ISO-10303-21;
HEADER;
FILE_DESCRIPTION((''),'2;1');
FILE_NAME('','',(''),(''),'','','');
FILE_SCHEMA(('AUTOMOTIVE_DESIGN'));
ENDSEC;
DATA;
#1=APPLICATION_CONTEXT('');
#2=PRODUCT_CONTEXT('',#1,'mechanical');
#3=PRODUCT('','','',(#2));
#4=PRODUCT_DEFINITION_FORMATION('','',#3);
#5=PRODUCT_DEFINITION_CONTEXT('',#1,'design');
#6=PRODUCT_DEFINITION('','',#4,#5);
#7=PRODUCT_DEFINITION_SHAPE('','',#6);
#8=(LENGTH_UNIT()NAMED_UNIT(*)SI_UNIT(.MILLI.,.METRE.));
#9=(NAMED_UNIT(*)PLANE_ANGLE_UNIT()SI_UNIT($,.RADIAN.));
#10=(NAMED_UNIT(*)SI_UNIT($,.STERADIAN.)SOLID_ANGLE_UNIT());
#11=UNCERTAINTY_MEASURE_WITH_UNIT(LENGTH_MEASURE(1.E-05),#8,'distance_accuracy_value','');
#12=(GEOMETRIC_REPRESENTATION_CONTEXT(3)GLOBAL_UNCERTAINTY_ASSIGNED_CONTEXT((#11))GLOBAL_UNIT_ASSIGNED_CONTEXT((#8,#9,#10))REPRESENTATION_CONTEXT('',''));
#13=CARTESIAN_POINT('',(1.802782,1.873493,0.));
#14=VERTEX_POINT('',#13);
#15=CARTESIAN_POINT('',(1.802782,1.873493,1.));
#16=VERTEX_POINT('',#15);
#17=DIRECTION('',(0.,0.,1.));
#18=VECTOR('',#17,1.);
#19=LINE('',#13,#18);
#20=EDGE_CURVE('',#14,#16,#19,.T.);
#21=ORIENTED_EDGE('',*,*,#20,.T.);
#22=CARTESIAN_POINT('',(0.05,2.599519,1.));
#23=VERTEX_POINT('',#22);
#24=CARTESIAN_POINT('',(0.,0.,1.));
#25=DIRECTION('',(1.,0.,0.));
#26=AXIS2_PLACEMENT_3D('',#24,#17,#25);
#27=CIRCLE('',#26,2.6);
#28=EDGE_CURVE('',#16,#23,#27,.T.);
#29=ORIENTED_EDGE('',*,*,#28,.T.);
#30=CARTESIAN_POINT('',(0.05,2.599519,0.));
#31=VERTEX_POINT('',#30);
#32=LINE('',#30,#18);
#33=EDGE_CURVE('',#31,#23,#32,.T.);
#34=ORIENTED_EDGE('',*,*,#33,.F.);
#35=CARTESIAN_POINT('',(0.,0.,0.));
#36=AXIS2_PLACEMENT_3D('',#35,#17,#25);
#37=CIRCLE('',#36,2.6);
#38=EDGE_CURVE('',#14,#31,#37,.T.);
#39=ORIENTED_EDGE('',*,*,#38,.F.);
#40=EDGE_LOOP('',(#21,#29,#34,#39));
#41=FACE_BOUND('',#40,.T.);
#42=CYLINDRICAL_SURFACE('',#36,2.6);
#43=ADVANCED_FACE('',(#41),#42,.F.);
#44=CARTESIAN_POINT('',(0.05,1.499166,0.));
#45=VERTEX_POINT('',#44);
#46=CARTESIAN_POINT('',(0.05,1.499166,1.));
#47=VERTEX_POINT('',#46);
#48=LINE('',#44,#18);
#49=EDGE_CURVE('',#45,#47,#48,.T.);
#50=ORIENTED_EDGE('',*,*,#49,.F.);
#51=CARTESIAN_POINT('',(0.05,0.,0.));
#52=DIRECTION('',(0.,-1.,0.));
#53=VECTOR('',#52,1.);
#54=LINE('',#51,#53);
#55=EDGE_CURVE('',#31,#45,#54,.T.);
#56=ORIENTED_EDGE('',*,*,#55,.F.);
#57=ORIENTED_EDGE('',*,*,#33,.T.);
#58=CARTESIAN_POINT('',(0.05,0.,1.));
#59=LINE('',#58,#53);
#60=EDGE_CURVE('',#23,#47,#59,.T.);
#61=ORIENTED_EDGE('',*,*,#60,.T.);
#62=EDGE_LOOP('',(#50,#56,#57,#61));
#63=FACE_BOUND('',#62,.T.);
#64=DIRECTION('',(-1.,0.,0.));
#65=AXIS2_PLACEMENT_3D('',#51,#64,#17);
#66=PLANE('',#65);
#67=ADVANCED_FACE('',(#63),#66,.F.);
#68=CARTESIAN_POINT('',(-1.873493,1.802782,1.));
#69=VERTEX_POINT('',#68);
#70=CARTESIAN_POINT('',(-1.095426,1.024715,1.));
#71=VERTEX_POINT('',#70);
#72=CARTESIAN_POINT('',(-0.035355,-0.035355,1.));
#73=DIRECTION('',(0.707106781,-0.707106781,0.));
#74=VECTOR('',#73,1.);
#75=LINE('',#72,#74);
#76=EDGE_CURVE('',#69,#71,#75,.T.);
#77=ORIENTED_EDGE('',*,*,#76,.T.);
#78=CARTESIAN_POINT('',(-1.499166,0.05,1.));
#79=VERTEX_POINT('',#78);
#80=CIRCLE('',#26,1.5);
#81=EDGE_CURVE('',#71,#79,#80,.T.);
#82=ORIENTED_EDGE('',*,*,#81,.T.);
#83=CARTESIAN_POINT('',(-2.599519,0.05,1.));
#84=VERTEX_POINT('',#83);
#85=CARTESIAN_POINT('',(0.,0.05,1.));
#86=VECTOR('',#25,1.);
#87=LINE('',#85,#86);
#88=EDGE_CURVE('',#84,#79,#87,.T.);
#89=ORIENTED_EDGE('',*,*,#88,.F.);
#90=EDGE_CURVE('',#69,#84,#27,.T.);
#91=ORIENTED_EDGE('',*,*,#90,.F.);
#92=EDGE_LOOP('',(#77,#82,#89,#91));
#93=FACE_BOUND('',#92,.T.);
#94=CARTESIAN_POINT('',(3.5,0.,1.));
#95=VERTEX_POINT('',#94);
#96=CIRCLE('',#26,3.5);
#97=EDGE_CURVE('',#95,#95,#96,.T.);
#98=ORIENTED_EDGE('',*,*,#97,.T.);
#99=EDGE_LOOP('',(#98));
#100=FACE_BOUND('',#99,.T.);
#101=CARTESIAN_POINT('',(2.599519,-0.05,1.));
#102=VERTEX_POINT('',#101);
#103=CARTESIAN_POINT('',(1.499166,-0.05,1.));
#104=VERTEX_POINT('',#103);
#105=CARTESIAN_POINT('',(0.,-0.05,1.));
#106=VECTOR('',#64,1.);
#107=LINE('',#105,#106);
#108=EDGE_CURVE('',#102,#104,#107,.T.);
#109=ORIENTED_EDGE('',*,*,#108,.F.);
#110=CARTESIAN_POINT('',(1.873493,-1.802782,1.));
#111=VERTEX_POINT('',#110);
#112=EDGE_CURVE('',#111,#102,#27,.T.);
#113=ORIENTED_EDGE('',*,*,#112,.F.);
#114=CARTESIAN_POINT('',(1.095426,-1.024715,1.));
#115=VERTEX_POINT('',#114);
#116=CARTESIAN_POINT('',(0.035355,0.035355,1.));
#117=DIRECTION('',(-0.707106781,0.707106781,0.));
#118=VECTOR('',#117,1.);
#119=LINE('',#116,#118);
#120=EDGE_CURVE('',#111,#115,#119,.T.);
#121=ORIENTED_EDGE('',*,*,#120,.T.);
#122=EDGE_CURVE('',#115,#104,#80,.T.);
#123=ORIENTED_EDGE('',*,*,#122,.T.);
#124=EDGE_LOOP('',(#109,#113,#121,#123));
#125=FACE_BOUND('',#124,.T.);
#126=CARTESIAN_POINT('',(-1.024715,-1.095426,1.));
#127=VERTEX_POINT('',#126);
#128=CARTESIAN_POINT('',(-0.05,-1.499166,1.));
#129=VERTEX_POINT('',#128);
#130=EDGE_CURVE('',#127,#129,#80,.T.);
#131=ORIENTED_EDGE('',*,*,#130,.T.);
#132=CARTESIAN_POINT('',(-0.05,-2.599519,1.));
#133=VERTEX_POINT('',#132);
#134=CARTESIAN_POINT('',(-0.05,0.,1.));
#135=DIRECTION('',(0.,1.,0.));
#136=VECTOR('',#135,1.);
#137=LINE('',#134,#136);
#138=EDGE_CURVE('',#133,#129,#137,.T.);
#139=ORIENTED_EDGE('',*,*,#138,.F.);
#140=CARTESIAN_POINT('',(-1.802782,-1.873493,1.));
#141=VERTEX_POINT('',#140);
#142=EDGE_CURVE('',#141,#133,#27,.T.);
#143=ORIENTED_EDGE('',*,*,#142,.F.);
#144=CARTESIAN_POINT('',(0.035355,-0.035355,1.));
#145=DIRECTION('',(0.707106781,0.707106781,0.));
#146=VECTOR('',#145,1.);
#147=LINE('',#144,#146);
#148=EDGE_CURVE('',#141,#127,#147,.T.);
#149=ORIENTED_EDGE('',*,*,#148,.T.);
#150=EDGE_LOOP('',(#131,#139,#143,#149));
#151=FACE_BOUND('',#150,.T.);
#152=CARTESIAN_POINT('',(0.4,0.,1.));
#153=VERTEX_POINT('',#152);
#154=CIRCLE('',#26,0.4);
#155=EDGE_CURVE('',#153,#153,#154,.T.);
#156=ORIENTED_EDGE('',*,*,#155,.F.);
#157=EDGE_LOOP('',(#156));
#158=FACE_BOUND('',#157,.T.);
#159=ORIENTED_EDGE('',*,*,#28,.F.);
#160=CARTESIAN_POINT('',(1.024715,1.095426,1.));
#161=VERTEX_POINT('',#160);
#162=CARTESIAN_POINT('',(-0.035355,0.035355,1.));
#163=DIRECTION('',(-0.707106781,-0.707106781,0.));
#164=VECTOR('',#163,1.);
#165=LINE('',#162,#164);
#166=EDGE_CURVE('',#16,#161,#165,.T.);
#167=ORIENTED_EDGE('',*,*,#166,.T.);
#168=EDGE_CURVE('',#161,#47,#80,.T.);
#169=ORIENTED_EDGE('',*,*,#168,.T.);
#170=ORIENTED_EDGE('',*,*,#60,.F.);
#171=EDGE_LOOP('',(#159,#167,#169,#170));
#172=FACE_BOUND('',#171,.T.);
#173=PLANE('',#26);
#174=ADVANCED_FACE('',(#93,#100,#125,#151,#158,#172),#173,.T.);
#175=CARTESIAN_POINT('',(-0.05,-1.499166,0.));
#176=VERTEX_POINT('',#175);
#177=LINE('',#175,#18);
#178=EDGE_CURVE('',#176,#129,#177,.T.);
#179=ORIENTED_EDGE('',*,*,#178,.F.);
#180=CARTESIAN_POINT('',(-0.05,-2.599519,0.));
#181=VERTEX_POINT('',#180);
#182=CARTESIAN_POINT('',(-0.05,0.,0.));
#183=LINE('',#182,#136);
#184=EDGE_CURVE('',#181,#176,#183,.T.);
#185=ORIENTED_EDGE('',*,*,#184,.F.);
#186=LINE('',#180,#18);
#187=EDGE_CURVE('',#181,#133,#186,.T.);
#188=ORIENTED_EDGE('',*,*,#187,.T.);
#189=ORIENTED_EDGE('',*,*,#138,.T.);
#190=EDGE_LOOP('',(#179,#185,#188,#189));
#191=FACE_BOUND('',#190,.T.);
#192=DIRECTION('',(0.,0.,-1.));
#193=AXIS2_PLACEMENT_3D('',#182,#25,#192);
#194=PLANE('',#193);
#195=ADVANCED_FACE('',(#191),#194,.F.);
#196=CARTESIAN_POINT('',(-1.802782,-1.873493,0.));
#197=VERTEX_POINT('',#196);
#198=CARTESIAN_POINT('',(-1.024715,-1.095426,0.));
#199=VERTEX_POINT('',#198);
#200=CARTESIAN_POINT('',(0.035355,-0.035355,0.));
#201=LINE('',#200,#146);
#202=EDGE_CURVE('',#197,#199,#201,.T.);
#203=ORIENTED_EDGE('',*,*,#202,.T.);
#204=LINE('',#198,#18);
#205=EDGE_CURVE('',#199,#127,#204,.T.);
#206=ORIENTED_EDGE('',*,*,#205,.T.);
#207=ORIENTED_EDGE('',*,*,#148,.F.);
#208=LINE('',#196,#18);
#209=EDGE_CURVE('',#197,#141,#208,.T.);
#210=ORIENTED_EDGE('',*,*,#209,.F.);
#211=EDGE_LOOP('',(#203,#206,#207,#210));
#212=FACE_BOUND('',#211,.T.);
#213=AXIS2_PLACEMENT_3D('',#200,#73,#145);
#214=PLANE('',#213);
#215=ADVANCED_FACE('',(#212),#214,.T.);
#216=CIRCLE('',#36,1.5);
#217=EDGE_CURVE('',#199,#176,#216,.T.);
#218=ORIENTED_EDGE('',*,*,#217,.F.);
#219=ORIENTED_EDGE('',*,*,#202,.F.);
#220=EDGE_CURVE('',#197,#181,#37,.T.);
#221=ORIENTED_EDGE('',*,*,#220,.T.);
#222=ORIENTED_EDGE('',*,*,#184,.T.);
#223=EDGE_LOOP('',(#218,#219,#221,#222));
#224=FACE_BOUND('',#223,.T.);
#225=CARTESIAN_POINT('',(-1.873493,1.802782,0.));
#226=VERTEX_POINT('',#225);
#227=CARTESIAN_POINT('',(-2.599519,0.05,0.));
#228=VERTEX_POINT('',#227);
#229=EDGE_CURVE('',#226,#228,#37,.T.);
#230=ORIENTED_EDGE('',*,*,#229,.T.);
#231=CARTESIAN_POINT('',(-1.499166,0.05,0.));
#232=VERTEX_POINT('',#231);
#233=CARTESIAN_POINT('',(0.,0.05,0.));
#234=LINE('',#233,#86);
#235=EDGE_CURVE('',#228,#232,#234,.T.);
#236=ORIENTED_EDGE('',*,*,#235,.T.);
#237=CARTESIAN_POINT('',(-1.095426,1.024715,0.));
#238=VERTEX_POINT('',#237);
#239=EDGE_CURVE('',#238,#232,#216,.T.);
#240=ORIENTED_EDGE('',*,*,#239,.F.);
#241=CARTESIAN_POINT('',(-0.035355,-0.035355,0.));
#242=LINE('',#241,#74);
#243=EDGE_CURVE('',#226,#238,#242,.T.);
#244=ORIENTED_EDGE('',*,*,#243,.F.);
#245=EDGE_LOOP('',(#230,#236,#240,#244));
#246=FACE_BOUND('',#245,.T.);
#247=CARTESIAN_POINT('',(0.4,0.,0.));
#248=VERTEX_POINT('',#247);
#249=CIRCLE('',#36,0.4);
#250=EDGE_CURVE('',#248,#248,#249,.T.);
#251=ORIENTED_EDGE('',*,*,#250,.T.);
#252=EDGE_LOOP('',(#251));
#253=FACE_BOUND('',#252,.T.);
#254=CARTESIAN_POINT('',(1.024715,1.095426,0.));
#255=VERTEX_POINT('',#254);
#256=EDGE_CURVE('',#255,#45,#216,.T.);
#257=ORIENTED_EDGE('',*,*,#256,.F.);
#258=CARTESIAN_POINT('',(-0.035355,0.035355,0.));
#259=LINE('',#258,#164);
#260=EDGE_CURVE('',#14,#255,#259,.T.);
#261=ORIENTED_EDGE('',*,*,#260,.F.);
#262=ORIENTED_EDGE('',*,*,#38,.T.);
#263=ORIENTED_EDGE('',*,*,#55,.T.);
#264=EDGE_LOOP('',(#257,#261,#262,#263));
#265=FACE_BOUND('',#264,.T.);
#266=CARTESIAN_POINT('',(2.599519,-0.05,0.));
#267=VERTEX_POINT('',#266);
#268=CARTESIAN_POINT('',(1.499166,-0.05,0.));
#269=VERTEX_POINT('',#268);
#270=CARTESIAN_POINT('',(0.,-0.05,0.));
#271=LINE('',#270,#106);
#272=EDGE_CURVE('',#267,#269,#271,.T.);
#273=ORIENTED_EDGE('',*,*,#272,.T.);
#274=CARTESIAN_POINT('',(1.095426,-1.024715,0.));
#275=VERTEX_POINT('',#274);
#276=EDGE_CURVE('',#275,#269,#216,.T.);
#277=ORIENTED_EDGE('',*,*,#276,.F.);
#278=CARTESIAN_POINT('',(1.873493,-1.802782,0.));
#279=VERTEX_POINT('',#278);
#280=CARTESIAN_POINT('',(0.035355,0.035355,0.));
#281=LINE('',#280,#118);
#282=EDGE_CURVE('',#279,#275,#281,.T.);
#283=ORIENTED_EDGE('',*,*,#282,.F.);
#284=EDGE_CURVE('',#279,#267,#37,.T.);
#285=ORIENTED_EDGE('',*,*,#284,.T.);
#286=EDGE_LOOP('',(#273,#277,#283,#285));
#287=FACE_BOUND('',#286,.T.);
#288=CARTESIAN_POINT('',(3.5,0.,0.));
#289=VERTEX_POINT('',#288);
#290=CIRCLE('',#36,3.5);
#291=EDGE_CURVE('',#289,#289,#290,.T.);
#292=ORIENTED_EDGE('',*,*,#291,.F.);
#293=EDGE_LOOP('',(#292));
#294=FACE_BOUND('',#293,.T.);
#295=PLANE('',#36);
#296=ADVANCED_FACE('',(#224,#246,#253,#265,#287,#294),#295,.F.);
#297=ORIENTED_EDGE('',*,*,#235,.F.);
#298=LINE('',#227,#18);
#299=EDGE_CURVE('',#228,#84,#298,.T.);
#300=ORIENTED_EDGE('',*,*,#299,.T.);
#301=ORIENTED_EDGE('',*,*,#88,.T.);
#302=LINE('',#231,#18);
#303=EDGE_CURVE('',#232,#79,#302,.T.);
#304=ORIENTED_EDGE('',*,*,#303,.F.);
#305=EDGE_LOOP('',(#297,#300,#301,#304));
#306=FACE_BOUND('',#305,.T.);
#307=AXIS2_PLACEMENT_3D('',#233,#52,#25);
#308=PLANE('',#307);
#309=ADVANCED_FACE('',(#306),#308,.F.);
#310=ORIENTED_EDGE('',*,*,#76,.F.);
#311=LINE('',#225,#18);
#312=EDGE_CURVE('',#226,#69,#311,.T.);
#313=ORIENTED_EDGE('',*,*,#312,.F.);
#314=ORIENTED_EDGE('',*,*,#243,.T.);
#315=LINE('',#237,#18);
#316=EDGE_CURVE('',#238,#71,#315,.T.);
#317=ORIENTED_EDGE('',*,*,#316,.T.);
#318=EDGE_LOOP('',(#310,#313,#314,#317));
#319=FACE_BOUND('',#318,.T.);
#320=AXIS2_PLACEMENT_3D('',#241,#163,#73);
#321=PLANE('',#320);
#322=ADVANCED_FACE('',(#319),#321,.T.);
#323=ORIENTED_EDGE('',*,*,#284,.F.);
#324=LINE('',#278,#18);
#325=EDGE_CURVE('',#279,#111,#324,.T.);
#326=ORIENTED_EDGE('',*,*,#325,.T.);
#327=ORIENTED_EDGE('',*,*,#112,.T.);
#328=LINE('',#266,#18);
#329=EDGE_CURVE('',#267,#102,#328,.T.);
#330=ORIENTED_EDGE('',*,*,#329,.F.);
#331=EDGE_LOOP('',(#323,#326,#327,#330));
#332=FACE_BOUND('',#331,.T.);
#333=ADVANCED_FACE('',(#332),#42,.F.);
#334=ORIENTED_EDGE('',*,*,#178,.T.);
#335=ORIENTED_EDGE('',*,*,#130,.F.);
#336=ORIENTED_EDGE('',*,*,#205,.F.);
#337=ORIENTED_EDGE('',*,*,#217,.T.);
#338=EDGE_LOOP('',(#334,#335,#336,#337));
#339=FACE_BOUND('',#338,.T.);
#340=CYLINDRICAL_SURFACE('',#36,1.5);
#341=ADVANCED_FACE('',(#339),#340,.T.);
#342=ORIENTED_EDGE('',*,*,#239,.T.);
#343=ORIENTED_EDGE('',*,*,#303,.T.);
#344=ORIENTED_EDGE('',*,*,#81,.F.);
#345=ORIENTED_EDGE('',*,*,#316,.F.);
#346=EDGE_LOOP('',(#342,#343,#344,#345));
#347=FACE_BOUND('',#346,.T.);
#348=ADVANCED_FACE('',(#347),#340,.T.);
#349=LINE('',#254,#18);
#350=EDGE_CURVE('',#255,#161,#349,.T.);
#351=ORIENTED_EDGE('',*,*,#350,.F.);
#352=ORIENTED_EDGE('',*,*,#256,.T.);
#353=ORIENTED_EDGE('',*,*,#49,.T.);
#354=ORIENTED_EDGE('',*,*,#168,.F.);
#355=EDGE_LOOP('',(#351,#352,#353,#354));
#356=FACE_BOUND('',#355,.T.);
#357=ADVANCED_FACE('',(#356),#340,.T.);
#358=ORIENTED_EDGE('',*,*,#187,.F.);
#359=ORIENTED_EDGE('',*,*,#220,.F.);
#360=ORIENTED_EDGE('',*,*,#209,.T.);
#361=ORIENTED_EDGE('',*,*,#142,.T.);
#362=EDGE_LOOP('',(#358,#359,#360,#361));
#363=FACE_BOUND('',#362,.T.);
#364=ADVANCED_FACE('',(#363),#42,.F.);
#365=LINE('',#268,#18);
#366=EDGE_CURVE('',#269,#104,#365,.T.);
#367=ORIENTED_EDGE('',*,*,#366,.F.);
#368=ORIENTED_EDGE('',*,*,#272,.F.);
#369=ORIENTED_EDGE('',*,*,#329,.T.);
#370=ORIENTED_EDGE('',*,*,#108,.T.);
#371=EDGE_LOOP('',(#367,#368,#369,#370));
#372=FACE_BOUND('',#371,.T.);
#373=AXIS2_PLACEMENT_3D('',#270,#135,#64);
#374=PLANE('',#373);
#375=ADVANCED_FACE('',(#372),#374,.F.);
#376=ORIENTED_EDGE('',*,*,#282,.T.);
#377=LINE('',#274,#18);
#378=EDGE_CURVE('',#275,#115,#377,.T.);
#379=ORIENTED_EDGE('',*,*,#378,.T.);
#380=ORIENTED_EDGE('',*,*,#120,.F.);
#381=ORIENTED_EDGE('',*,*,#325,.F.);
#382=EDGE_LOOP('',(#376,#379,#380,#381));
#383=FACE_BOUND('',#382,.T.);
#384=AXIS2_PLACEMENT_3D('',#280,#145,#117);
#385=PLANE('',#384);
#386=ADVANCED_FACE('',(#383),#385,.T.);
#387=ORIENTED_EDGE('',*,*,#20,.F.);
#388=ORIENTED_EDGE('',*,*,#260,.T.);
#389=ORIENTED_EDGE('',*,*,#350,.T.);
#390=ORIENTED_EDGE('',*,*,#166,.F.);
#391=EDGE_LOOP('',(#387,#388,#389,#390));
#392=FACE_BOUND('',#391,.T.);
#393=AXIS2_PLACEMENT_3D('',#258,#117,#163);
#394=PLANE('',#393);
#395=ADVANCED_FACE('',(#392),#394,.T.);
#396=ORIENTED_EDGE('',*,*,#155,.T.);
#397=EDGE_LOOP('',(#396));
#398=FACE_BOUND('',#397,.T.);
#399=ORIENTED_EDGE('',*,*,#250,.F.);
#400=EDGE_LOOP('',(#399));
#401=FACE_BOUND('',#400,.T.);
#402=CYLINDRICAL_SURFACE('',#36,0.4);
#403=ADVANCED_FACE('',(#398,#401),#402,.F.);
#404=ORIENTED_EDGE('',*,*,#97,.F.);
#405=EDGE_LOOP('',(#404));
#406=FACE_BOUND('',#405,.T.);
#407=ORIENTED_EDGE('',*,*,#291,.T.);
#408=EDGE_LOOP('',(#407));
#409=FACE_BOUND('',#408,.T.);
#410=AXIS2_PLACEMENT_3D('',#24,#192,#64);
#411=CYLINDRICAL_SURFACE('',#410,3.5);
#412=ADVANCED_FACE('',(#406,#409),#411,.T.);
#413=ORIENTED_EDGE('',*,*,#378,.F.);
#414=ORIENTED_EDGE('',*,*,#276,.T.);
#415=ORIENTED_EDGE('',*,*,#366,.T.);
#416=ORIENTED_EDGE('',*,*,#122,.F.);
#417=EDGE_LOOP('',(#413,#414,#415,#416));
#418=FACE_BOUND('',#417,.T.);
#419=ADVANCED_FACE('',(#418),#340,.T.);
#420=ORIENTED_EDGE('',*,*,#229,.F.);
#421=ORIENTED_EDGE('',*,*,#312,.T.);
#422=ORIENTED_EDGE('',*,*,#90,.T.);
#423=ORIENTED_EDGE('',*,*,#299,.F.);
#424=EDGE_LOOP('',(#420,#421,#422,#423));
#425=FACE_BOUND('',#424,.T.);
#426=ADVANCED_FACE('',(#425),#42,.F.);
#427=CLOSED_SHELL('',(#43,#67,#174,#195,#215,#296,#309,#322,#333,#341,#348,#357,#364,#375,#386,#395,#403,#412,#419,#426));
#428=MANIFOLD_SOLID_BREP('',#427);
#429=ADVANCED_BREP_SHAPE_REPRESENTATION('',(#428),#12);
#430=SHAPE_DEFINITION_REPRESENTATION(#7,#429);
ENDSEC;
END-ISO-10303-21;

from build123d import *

# Parameters (mm, degrees)
SKETCH2_R           = 3.5
BOSS_EXTRUDE1_DEPTH = 1
SKETCH4_R           = 0.4
CUT_EXTRUDE2_DEPTH  = 6.049752469
CUT_EXTRUDE3_START  = -1
CUT_EXTRUDE3_DEPTH  = 1
CIRPATTERN1_COUNT   = 4


# Read off the part's stored shape, not the designer's step: Cut-Extrude3
with BuildPart() as part:
    # Sketch2 → Boss-Extrude1 (new body)
    with BuildSketch(Plane.XY):
        Circle(SKETCH2_R)
    extrude(amount=BOSS_EXTRUDE1_DEPTH)

    # Sketch4 → Cut-Extrude2 (cut, through all)
    with BuildSketch(Plane.XY.offset(1)):
        Circle(SKETCH4_R)
    extrude(amount=-CUT_EXTRUDE2_DEPTH, mode=Mode.SUBTRACT)

    # Cut-Extrude3 outline → Cut-Extrude3 (cut)
    with BuildSketch(Plane.XY.offset(1).offset(CUT_EXTRUDE3_START)):
        with BuildLine():
            ThreePointArc((-0.05, -1.499166435), (-0.574025148, -1.385819299), (-1.024715413, -1.095426092))
            Line((-1.024715413, -1.095426092), (-1.802782305, -1.873492984))
            ThreePointArc((-1.802782305, -1.873492984), (-0.994976924, -2.402086785), (-0.05, -2.599519186))
            Line((-0.05, -2.599519186), (-0.05, -1.499166435))
        make_face()
    cut_extrude3 = extrude(amount=CUT_EXTRUDE3_DEPTH, mode=Mode.SUBTRACT)

    # CirPattern1: Cut-Extrude3 ×4 about axis
    cirpattern1_axis = Axis((0, 0, 0), (0, 0, 1))
    for i in range(1, CIRPATTERN1_COUNT):
        add(cut_extrude3.rotate(cirpattern1_axis, i * 360 / CIRPATTERN1_COUNT), mode=Mode.SUBTRACT)


solid = part.part
